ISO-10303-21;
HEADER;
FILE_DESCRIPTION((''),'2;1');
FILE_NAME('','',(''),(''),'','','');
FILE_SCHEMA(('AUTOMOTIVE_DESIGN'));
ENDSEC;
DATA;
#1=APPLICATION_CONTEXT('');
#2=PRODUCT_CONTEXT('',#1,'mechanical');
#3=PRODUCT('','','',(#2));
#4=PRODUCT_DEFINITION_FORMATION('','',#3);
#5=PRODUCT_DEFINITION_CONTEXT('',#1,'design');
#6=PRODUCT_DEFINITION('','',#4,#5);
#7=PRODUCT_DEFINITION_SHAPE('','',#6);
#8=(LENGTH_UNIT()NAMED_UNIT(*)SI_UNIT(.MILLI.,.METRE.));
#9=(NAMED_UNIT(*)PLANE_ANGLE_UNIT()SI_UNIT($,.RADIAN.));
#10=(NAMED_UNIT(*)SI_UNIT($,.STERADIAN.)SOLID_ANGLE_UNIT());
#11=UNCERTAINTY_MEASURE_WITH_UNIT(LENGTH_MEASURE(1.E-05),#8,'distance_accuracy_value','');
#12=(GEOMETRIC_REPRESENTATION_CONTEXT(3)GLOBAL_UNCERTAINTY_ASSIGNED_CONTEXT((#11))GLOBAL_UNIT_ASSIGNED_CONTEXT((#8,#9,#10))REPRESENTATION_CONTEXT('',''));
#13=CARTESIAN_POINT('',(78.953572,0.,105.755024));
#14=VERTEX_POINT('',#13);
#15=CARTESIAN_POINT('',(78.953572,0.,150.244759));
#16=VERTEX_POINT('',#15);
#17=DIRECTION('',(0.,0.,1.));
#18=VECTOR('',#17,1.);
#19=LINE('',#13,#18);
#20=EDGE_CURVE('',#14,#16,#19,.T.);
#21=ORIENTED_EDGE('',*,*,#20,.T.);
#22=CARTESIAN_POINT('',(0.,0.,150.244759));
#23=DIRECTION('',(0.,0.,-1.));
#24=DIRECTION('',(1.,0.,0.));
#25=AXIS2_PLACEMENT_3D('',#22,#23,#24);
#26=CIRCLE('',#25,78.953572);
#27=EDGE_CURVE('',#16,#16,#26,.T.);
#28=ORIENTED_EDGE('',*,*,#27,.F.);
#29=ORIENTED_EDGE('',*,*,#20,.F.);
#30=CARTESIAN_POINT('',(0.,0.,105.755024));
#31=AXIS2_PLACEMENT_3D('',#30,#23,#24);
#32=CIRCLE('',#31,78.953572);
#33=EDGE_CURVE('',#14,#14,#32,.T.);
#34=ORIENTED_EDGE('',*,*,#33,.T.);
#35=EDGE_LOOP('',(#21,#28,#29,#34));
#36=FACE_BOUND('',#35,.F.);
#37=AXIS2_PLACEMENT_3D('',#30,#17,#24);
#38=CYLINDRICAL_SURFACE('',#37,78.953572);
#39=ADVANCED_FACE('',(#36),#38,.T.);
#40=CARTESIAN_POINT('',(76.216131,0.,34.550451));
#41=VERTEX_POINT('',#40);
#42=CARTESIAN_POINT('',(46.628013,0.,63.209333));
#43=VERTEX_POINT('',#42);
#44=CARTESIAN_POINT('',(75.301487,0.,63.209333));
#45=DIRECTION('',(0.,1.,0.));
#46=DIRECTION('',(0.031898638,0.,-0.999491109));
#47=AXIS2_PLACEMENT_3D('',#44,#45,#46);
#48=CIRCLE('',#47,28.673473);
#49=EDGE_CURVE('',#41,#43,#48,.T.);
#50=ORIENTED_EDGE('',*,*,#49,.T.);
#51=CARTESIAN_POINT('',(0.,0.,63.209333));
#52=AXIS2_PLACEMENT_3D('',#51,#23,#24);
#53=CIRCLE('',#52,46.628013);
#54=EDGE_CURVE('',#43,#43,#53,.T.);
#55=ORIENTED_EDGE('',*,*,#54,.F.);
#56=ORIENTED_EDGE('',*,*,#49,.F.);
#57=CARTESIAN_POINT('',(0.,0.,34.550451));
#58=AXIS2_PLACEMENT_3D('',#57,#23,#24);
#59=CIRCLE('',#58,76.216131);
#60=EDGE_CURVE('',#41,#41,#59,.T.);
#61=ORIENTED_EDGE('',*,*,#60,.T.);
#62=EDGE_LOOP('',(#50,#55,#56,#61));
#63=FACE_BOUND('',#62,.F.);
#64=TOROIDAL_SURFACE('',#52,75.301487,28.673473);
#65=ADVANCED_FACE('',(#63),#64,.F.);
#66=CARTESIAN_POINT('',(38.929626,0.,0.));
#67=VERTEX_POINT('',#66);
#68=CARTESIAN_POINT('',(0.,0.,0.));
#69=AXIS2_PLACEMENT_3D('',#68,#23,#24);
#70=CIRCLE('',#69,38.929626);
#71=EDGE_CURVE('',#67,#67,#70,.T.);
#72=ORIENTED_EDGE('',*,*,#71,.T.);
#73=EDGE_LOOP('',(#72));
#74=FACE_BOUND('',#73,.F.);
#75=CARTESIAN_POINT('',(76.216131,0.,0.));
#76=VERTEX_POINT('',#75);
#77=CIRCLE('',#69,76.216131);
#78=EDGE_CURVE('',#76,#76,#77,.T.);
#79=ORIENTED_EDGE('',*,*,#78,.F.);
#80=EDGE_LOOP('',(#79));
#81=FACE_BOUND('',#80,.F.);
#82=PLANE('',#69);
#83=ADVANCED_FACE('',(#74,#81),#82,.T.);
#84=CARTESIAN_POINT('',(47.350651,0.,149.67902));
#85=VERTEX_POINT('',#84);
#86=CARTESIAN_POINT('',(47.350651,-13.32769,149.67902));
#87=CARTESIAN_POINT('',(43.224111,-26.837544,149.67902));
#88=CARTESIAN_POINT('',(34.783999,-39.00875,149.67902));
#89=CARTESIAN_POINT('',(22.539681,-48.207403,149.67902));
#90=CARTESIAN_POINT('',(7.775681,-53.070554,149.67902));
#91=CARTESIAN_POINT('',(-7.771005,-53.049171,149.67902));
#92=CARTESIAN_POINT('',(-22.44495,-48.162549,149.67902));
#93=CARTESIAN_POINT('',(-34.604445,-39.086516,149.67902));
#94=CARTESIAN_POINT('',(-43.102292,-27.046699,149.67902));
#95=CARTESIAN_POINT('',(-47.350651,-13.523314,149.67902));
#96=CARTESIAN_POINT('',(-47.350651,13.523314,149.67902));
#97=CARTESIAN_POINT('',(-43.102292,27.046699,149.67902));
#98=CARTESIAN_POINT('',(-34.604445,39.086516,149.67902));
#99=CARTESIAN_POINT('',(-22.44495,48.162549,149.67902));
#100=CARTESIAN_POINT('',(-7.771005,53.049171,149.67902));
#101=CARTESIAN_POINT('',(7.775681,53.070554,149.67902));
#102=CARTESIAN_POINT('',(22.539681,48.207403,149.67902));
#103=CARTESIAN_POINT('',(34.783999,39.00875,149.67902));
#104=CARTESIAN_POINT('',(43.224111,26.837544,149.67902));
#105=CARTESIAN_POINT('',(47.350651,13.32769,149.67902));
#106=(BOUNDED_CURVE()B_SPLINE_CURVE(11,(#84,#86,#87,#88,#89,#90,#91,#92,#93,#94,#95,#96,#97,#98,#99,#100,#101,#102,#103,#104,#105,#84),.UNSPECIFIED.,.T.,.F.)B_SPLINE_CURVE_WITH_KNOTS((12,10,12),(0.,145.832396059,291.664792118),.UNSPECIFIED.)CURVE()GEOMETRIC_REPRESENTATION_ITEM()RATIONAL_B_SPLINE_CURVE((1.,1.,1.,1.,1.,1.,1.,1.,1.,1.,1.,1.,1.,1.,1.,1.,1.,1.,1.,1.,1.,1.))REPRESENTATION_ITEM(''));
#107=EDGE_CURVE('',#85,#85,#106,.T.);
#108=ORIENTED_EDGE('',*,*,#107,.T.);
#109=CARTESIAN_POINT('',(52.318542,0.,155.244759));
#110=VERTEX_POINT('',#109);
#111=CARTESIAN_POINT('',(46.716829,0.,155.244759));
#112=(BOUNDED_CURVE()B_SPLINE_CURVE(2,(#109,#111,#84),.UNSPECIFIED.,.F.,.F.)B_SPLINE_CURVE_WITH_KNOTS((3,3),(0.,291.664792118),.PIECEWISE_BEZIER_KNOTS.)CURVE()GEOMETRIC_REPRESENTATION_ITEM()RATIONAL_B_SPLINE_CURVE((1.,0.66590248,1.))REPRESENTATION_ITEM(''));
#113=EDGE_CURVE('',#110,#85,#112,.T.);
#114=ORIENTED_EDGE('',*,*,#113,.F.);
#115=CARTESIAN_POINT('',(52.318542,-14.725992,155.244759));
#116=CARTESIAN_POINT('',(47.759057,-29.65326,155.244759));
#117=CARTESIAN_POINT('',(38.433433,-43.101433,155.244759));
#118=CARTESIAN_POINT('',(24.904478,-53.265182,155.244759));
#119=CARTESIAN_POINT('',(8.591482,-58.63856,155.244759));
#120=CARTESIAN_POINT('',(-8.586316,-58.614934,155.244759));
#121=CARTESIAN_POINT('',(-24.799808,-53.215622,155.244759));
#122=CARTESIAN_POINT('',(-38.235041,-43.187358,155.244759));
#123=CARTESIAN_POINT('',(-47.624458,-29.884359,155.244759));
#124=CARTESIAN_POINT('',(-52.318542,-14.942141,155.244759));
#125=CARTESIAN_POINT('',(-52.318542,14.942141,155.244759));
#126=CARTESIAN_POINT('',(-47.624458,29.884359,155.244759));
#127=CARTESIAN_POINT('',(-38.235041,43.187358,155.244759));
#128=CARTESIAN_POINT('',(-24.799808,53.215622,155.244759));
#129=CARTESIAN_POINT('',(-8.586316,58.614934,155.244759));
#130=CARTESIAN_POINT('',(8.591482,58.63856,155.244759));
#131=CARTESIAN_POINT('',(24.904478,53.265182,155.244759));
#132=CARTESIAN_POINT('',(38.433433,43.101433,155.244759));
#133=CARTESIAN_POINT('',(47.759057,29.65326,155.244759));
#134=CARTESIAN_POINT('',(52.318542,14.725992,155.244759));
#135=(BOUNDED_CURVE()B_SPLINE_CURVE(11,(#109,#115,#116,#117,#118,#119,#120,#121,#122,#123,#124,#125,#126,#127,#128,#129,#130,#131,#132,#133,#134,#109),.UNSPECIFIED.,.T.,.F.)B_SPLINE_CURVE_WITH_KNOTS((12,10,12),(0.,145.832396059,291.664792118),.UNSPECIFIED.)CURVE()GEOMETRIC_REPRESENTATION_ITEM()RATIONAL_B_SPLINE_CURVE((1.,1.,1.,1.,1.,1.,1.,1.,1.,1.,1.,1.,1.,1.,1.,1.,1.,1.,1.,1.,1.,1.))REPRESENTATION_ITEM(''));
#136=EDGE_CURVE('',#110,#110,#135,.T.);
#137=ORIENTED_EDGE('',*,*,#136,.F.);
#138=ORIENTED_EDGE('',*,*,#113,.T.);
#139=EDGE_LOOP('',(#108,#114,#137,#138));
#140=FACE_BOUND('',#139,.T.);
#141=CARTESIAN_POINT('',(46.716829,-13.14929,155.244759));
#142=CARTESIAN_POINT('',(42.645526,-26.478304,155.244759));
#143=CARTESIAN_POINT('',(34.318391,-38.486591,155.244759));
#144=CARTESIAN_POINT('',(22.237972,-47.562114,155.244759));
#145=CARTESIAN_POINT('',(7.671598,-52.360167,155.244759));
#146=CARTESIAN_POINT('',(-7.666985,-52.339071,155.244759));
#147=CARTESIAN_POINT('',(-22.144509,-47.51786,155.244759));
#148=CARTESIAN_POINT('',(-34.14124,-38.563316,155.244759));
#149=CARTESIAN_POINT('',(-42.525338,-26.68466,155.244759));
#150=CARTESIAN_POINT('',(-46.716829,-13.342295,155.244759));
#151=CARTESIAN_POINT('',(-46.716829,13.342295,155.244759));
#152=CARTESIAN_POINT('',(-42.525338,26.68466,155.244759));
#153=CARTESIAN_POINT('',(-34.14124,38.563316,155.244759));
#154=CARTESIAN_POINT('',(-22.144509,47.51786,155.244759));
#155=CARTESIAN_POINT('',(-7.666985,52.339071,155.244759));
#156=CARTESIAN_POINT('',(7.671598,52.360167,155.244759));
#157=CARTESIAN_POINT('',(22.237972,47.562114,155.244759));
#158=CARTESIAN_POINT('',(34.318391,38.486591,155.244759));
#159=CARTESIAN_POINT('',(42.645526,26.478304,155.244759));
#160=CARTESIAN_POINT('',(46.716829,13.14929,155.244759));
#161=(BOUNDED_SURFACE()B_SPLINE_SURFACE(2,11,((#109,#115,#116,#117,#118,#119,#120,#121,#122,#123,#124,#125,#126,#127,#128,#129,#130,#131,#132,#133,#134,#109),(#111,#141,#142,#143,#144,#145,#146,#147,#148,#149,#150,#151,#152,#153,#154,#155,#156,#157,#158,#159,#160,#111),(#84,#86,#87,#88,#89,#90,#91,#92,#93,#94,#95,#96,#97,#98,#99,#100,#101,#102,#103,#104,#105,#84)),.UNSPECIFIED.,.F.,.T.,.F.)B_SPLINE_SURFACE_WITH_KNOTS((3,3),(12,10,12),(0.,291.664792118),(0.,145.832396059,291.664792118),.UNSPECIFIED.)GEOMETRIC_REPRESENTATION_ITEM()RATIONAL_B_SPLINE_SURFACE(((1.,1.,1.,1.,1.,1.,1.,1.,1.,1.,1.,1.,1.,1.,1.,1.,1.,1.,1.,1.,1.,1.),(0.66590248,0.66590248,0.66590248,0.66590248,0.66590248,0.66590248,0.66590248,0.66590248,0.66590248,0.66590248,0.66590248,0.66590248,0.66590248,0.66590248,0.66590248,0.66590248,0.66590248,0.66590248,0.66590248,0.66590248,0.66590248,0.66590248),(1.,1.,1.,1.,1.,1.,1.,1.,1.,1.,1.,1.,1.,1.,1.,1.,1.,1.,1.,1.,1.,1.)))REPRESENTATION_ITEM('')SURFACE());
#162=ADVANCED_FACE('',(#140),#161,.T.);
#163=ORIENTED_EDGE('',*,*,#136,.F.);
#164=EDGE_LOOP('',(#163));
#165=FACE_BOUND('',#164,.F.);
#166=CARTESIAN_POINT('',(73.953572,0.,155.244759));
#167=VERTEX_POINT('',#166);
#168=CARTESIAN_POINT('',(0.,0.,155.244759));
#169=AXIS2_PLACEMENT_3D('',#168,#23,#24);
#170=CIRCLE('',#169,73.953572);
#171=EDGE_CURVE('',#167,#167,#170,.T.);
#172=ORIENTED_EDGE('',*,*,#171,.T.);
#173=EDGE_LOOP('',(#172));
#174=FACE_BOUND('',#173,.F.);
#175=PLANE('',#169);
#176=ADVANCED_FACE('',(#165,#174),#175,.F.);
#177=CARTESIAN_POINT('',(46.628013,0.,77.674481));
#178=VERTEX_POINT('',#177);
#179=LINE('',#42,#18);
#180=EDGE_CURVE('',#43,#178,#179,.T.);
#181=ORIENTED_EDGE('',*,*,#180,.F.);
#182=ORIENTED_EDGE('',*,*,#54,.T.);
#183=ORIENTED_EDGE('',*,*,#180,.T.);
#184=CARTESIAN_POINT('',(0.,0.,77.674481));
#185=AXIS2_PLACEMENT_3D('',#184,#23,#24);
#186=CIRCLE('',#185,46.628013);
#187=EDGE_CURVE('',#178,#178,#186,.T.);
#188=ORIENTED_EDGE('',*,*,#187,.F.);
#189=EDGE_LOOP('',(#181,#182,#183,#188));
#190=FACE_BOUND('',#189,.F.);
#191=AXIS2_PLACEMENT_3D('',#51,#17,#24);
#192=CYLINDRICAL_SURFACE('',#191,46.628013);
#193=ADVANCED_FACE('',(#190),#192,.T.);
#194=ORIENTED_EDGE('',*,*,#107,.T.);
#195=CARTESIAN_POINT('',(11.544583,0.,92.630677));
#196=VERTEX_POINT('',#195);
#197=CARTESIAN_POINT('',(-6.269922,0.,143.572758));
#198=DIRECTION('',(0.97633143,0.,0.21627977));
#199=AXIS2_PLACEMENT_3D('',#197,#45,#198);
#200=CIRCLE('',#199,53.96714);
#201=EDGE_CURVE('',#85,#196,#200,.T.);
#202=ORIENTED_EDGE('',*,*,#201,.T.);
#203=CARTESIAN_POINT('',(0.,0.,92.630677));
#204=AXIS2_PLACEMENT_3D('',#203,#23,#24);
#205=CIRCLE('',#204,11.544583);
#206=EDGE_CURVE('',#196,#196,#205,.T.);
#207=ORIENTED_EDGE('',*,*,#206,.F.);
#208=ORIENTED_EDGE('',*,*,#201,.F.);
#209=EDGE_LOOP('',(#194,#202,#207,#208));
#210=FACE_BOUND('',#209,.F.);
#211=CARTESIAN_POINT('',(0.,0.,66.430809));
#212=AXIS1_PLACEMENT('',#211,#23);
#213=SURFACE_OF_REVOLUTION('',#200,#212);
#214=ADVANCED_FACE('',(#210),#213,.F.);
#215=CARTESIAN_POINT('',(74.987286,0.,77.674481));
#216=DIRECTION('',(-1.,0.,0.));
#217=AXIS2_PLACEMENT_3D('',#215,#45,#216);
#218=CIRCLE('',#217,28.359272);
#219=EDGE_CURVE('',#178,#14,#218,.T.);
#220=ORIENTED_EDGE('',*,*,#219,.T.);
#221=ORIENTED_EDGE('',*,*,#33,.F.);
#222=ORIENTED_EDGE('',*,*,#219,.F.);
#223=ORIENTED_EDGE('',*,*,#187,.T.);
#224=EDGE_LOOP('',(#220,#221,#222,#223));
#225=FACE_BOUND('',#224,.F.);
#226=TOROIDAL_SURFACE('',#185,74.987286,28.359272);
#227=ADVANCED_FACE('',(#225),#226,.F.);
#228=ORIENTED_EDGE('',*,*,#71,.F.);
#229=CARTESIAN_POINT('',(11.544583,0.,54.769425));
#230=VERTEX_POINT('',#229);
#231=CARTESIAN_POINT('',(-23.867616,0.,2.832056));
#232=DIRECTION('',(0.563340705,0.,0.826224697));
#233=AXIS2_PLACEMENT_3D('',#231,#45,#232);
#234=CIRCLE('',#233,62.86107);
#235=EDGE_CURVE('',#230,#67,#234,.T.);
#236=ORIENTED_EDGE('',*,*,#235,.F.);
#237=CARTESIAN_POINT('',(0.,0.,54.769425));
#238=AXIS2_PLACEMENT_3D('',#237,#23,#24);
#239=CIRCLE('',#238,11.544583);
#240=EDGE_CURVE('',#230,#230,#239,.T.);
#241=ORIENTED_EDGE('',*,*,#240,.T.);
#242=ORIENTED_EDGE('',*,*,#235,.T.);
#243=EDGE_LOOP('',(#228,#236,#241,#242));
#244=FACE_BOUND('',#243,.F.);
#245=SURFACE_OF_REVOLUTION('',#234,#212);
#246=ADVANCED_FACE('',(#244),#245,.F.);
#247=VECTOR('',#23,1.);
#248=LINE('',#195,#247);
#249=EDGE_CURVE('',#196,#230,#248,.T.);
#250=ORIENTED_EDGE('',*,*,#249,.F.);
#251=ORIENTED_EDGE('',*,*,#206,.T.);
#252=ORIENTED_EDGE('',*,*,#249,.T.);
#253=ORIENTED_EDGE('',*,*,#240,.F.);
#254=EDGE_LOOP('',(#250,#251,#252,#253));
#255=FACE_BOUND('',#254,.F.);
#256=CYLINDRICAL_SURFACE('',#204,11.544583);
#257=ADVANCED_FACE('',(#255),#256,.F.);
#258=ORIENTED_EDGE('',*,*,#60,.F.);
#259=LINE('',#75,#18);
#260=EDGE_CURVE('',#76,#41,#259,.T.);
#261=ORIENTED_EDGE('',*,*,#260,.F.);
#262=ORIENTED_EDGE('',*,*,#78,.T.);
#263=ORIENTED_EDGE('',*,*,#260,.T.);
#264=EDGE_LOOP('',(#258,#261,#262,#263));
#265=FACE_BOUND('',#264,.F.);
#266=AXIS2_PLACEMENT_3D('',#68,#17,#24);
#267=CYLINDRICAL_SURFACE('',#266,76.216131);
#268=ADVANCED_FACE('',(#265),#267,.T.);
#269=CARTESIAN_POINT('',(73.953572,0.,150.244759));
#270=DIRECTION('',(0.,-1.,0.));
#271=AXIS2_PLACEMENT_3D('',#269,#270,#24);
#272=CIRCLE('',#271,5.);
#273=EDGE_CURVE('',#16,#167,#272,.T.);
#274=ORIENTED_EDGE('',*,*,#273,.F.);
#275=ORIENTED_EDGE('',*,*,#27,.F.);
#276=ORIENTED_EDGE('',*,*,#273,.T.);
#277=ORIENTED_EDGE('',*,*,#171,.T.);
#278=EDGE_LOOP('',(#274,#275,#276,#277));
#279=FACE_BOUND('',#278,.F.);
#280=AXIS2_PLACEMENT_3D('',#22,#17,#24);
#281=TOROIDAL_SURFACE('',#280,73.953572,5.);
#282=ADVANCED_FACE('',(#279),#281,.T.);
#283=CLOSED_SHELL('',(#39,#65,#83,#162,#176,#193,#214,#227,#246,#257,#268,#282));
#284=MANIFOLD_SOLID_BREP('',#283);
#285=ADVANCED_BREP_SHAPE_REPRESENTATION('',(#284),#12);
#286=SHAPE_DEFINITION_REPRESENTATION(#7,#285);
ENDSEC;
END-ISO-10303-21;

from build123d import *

# Parameters (mm, degrees)
F3_R = 5


# Not quite as in the source:
# - a feature of the source that left no trace in its solid (it failed there, or was rolled back) is left out


with BuildPart() as f2:
    # F0 (on Front) → F2 (revolve)
    with BuildSketch(Plane.XZ):
        with BuildLine():
            Line((38.9296258549, 0), (76.2161314487, 0))
            Line((76.2161314487, 0), (76.2161314487, 34.5504507422))
            ThreePointArc((76.2161314487, 34.5504507422), (55.3522757176, 42.613287739), (46.6280132532, 63.2093325257))
            Line((46.6280132532, 63.2093325257), (46.6280132532, 77.6744805479))
            ThreePointArc((46.6280132532, 77.6744805479), (56.3893375618, 99.0839330453), (78.9535716176, 105.7550236583))
            Line((78.9535716176, 105.7550236583), (78.9535716176, 155.2447585142))
            Line((78.9535716176, 155.2447585142), (46.4198933914, 155.2447585142))
            ThreePointArc((46.4198933914, 155.2447585142), (40.8771418071, 117.3123958387), (11.5445833653, 92.6306769252))
            Line((11.5445833653, 92.6306769252), (11.5445833653, 54.7694249827))
            ThreePointArc((11.5445833653, 54.7694249827), (32.356898751, 30.9446524602), (38.9296258549, 0))
        make_face()
    revolve(axis=Axis((0, 0, 66.4308094728), (0, 0, -1)))

    # F3
    f3_edges = [f2.edges().sort_by_distance(p)[0] for p in [
        (-78.953572, 0, 155.244759),
        (-46.419893, 0, 155.244759),
    ]]
    fillet(f3_edges, radius=F3_R)


solid = f2.part
